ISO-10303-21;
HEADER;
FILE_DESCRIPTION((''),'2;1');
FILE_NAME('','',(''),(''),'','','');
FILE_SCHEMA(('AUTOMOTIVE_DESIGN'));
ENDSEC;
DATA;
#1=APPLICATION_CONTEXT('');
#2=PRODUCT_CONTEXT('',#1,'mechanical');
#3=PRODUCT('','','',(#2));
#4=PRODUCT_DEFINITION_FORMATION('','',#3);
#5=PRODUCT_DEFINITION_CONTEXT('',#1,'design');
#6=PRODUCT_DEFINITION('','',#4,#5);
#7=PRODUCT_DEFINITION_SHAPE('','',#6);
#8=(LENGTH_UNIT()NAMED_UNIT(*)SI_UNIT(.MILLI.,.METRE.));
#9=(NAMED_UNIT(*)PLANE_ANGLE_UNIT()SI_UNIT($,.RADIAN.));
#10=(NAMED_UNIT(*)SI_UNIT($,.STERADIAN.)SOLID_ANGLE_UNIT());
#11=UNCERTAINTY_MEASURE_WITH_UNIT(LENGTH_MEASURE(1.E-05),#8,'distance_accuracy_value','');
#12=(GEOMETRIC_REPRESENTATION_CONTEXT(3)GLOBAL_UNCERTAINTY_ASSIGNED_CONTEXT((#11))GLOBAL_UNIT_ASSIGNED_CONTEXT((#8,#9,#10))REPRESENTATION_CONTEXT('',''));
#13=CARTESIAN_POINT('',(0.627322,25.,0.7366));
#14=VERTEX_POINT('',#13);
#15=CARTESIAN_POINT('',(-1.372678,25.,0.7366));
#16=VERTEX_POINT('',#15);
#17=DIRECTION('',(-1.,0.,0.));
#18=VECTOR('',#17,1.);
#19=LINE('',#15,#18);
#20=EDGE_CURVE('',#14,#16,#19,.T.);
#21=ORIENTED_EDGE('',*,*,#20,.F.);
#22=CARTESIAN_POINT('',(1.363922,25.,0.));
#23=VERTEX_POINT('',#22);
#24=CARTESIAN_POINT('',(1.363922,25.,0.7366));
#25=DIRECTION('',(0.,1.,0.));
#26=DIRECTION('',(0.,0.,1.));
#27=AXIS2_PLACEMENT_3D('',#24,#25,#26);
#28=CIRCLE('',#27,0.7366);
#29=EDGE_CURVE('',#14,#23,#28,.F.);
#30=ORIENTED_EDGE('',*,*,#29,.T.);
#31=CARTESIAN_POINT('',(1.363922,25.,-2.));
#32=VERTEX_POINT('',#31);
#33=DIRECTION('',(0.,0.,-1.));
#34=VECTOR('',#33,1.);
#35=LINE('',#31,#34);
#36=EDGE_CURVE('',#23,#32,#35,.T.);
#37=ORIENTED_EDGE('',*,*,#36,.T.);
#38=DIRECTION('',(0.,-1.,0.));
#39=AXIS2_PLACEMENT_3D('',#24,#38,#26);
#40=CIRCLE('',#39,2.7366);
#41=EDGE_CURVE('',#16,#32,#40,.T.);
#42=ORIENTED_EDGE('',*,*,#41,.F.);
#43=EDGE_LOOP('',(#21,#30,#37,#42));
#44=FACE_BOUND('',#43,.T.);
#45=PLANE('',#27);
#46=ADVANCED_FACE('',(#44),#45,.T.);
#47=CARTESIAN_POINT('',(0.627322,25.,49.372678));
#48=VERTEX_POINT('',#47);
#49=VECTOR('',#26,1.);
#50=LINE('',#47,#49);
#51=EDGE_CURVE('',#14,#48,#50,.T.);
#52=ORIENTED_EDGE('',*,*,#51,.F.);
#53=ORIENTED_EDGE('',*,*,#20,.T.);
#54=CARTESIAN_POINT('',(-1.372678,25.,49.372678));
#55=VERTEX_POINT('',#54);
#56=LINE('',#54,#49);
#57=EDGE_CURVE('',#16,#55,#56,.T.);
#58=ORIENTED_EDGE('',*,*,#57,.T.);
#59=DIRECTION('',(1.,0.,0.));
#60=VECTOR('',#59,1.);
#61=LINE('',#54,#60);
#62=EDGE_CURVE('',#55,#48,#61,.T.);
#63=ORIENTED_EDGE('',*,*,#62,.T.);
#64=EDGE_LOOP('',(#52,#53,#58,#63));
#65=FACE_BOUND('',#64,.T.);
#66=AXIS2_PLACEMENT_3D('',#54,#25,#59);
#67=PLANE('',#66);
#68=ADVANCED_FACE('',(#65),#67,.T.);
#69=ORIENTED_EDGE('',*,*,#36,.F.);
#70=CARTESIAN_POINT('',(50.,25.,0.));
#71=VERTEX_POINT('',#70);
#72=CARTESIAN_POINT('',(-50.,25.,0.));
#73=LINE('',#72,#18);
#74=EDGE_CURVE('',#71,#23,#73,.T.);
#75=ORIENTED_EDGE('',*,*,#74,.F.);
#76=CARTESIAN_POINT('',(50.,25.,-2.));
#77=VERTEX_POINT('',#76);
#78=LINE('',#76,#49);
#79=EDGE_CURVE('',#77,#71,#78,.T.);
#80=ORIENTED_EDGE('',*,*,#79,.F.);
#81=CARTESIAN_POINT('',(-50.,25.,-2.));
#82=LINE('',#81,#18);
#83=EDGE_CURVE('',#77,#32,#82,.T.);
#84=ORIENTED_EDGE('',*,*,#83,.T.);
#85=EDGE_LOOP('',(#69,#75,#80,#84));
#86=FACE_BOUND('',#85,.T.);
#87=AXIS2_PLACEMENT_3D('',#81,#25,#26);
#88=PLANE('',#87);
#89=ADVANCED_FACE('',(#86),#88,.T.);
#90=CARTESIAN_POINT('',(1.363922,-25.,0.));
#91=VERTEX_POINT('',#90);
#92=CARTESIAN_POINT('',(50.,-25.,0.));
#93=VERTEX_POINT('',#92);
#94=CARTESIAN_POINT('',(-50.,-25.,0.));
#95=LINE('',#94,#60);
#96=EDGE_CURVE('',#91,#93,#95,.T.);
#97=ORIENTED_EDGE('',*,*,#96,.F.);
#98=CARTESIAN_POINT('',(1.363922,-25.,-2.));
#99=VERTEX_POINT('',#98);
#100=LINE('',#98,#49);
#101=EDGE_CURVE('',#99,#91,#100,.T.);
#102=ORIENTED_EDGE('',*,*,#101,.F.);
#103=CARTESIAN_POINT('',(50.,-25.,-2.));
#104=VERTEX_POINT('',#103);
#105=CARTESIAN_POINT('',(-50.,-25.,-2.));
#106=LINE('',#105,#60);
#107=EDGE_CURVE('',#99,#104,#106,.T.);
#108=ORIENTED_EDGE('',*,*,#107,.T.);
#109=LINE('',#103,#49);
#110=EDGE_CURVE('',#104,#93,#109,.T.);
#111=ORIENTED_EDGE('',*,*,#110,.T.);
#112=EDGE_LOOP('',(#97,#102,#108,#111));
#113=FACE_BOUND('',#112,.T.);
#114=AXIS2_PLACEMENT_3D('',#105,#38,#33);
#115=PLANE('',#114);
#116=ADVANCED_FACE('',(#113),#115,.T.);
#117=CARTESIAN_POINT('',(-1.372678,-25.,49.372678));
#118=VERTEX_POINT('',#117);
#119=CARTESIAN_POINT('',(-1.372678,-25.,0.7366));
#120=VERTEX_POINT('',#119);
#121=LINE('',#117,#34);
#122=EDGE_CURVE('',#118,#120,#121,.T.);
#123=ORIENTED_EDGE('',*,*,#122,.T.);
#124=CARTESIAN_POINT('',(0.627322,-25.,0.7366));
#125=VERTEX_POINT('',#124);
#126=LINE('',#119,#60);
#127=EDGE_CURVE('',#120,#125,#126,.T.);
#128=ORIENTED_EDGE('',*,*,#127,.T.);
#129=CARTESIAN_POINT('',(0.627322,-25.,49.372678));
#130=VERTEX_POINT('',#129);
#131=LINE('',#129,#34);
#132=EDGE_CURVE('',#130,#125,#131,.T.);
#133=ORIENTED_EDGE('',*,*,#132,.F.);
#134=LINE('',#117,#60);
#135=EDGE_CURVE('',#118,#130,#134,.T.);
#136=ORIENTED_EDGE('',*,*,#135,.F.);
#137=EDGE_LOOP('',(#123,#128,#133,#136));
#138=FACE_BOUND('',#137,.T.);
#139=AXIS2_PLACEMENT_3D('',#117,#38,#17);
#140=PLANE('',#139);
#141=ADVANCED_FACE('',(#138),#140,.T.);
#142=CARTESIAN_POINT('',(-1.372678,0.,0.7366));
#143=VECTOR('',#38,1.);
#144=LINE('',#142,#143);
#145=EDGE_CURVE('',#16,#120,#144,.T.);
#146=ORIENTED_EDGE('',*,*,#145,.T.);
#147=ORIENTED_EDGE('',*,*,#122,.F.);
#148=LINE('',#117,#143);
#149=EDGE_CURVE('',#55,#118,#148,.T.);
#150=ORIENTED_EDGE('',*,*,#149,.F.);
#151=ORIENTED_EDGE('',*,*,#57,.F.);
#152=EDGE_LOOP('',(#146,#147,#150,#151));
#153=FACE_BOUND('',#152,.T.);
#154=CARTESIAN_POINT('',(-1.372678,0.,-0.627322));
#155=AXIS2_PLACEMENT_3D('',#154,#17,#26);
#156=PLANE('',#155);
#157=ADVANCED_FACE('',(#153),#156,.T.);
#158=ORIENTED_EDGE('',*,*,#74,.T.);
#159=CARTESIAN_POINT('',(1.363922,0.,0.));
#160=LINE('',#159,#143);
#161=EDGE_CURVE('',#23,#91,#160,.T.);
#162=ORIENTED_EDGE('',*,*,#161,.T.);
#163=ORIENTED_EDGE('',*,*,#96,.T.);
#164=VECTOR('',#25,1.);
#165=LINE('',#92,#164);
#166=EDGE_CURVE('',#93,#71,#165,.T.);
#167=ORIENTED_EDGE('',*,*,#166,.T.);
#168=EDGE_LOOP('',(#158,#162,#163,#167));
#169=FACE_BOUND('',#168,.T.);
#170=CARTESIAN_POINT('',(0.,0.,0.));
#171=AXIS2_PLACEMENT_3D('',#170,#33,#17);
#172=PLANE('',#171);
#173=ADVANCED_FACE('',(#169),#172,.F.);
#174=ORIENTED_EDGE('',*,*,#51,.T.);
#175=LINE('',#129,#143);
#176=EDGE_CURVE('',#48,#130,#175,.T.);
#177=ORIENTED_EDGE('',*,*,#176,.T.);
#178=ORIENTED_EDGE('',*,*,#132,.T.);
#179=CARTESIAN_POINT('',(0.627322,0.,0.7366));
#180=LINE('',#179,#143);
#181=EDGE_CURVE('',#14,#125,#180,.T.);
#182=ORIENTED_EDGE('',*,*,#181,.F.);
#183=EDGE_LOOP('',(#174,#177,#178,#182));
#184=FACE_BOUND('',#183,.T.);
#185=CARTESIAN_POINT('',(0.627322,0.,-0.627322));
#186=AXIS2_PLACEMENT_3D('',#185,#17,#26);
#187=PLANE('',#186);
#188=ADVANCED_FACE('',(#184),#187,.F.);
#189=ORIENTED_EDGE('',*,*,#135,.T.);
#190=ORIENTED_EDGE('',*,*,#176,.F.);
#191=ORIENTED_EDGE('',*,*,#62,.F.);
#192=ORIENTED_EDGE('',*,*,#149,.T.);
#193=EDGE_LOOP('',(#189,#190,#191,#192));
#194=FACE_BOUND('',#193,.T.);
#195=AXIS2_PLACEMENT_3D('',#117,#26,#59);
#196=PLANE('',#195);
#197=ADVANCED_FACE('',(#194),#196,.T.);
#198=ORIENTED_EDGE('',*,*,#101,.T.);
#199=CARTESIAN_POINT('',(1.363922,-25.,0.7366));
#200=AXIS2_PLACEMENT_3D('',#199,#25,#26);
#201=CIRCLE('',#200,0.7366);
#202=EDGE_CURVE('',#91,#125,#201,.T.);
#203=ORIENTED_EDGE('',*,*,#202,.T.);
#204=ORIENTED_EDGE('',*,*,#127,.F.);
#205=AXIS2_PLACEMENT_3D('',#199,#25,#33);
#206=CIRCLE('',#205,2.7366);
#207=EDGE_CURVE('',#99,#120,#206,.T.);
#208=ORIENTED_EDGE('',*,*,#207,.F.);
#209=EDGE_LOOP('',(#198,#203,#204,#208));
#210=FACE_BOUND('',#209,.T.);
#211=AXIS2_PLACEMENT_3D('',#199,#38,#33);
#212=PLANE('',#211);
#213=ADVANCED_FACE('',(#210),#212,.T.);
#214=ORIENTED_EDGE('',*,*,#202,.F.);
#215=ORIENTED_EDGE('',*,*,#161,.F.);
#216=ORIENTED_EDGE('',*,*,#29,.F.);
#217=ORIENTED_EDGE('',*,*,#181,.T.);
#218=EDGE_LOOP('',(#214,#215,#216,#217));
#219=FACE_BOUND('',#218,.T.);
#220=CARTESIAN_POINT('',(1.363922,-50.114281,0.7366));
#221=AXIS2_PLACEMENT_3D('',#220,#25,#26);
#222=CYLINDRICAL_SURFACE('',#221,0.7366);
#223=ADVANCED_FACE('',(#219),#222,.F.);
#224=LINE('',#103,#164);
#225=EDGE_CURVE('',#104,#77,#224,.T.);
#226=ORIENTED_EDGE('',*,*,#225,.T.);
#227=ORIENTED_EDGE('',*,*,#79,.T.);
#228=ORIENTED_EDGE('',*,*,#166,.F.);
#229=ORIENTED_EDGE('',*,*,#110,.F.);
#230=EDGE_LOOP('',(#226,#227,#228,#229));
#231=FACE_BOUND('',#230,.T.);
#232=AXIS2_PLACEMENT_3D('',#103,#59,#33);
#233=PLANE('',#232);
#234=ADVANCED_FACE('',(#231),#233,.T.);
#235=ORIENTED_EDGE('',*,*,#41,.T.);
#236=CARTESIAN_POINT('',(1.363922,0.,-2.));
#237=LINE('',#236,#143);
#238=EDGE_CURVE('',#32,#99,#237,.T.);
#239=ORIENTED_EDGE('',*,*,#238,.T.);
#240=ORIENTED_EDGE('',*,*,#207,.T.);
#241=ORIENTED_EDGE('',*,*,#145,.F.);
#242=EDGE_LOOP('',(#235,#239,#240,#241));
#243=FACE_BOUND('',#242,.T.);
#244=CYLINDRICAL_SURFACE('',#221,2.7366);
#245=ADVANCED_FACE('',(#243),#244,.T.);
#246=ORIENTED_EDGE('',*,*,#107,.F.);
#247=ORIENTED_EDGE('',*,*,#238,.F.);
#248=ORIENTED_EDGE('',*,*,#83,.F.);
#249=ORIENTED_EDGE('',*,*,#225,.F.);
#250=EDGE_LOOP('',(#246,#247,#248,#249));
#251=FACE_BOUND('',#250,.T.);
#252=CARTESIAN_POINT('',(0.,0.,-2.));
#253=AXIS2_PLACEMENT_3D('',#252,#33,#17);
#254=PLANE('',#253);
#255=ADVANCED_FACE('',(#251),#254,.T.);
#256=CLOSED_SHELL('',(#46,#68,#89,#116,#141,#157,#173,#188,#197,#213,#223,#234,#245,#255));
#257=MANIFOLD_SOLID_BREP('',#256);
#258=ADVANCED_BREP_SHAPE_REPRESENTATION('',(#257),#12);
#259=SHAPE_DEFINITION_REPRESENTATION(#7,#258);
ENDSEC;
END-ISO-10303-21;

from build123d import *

# Parameters (mm, degrees)
SKETCH_1_W             = 100
SKETCH_1_H             = 50
SM_BASE_FLANGE_2_DEPTH = 2
OTHER_START            = -25
OTHER_1_DEPTH          = 50
OTHER_1_2_DEPTH        = 50


# Read off the part's stored shape, not the designer's step: Нарисованный сгиб1
# Sheet-metal steps are written as plain solids
with BuildPart() as part:
    # Эскиз1 → Базовая кромка2 (new body)
    with BuildSketch(Plane.XY):
        Rectangle(SKETCH_1_W, SKETCH_1_H)
    extrude(amount=-SM_BASE_FLANGE_2_DEPTH)

    # Other 1 outline → Other 1 (cut)
    with BuildSketch(Plane(origin=(0, 0, 0), x_dir=(1, 0, 0), z_dir=(0, 1, 0)).offset(OTHER_START)):
        with BuildLine():
            Line((-50, 0), (-1.271679947, 0))
            ThreePointArc((-1.271679947, 0), (-0.290344758, 1.443395312), (1.363922451, 2))
            Line((1.363922451, 2), (-50, 2))
            Line((-50, 2), (-50, 0))
        make_face()
    extrude(amount=OTHER_1_DEPTH, mode=Mode.SUBTRACT)

    # Other 1 2 outline → Other 1 2 (add)
    with BuildSketch(Plane(origin=(0, 0, 0), x_dir=(1, 0, 0), z_dir=(0, 1, 0)).offset(OTHER_START)):
        with BuildLine():
            ThreePointArc((-1.271679947, 0), (-1.347310579, -0.364854094), (-1.372677549, -0.7366))
            Line((-1.372677549, -0.7366), (-1.372677549, -49.372677549))
            Line((-1.372677549, -49.372677549), (0.627322451, -49.372677549))
            Line((0.627322451, -49.372677549), (0.627322451, -0.7366))
            ThreePointArc((0.627322451, -0.7366), (0.843067596, -0.215745145), (1.363922451, 0))
            Line((1.363922451, 0), (-1.271679947, 0))
        make_face()
    extrude(amount=OTHER_1_2_DEPTH)


solid = part.part
